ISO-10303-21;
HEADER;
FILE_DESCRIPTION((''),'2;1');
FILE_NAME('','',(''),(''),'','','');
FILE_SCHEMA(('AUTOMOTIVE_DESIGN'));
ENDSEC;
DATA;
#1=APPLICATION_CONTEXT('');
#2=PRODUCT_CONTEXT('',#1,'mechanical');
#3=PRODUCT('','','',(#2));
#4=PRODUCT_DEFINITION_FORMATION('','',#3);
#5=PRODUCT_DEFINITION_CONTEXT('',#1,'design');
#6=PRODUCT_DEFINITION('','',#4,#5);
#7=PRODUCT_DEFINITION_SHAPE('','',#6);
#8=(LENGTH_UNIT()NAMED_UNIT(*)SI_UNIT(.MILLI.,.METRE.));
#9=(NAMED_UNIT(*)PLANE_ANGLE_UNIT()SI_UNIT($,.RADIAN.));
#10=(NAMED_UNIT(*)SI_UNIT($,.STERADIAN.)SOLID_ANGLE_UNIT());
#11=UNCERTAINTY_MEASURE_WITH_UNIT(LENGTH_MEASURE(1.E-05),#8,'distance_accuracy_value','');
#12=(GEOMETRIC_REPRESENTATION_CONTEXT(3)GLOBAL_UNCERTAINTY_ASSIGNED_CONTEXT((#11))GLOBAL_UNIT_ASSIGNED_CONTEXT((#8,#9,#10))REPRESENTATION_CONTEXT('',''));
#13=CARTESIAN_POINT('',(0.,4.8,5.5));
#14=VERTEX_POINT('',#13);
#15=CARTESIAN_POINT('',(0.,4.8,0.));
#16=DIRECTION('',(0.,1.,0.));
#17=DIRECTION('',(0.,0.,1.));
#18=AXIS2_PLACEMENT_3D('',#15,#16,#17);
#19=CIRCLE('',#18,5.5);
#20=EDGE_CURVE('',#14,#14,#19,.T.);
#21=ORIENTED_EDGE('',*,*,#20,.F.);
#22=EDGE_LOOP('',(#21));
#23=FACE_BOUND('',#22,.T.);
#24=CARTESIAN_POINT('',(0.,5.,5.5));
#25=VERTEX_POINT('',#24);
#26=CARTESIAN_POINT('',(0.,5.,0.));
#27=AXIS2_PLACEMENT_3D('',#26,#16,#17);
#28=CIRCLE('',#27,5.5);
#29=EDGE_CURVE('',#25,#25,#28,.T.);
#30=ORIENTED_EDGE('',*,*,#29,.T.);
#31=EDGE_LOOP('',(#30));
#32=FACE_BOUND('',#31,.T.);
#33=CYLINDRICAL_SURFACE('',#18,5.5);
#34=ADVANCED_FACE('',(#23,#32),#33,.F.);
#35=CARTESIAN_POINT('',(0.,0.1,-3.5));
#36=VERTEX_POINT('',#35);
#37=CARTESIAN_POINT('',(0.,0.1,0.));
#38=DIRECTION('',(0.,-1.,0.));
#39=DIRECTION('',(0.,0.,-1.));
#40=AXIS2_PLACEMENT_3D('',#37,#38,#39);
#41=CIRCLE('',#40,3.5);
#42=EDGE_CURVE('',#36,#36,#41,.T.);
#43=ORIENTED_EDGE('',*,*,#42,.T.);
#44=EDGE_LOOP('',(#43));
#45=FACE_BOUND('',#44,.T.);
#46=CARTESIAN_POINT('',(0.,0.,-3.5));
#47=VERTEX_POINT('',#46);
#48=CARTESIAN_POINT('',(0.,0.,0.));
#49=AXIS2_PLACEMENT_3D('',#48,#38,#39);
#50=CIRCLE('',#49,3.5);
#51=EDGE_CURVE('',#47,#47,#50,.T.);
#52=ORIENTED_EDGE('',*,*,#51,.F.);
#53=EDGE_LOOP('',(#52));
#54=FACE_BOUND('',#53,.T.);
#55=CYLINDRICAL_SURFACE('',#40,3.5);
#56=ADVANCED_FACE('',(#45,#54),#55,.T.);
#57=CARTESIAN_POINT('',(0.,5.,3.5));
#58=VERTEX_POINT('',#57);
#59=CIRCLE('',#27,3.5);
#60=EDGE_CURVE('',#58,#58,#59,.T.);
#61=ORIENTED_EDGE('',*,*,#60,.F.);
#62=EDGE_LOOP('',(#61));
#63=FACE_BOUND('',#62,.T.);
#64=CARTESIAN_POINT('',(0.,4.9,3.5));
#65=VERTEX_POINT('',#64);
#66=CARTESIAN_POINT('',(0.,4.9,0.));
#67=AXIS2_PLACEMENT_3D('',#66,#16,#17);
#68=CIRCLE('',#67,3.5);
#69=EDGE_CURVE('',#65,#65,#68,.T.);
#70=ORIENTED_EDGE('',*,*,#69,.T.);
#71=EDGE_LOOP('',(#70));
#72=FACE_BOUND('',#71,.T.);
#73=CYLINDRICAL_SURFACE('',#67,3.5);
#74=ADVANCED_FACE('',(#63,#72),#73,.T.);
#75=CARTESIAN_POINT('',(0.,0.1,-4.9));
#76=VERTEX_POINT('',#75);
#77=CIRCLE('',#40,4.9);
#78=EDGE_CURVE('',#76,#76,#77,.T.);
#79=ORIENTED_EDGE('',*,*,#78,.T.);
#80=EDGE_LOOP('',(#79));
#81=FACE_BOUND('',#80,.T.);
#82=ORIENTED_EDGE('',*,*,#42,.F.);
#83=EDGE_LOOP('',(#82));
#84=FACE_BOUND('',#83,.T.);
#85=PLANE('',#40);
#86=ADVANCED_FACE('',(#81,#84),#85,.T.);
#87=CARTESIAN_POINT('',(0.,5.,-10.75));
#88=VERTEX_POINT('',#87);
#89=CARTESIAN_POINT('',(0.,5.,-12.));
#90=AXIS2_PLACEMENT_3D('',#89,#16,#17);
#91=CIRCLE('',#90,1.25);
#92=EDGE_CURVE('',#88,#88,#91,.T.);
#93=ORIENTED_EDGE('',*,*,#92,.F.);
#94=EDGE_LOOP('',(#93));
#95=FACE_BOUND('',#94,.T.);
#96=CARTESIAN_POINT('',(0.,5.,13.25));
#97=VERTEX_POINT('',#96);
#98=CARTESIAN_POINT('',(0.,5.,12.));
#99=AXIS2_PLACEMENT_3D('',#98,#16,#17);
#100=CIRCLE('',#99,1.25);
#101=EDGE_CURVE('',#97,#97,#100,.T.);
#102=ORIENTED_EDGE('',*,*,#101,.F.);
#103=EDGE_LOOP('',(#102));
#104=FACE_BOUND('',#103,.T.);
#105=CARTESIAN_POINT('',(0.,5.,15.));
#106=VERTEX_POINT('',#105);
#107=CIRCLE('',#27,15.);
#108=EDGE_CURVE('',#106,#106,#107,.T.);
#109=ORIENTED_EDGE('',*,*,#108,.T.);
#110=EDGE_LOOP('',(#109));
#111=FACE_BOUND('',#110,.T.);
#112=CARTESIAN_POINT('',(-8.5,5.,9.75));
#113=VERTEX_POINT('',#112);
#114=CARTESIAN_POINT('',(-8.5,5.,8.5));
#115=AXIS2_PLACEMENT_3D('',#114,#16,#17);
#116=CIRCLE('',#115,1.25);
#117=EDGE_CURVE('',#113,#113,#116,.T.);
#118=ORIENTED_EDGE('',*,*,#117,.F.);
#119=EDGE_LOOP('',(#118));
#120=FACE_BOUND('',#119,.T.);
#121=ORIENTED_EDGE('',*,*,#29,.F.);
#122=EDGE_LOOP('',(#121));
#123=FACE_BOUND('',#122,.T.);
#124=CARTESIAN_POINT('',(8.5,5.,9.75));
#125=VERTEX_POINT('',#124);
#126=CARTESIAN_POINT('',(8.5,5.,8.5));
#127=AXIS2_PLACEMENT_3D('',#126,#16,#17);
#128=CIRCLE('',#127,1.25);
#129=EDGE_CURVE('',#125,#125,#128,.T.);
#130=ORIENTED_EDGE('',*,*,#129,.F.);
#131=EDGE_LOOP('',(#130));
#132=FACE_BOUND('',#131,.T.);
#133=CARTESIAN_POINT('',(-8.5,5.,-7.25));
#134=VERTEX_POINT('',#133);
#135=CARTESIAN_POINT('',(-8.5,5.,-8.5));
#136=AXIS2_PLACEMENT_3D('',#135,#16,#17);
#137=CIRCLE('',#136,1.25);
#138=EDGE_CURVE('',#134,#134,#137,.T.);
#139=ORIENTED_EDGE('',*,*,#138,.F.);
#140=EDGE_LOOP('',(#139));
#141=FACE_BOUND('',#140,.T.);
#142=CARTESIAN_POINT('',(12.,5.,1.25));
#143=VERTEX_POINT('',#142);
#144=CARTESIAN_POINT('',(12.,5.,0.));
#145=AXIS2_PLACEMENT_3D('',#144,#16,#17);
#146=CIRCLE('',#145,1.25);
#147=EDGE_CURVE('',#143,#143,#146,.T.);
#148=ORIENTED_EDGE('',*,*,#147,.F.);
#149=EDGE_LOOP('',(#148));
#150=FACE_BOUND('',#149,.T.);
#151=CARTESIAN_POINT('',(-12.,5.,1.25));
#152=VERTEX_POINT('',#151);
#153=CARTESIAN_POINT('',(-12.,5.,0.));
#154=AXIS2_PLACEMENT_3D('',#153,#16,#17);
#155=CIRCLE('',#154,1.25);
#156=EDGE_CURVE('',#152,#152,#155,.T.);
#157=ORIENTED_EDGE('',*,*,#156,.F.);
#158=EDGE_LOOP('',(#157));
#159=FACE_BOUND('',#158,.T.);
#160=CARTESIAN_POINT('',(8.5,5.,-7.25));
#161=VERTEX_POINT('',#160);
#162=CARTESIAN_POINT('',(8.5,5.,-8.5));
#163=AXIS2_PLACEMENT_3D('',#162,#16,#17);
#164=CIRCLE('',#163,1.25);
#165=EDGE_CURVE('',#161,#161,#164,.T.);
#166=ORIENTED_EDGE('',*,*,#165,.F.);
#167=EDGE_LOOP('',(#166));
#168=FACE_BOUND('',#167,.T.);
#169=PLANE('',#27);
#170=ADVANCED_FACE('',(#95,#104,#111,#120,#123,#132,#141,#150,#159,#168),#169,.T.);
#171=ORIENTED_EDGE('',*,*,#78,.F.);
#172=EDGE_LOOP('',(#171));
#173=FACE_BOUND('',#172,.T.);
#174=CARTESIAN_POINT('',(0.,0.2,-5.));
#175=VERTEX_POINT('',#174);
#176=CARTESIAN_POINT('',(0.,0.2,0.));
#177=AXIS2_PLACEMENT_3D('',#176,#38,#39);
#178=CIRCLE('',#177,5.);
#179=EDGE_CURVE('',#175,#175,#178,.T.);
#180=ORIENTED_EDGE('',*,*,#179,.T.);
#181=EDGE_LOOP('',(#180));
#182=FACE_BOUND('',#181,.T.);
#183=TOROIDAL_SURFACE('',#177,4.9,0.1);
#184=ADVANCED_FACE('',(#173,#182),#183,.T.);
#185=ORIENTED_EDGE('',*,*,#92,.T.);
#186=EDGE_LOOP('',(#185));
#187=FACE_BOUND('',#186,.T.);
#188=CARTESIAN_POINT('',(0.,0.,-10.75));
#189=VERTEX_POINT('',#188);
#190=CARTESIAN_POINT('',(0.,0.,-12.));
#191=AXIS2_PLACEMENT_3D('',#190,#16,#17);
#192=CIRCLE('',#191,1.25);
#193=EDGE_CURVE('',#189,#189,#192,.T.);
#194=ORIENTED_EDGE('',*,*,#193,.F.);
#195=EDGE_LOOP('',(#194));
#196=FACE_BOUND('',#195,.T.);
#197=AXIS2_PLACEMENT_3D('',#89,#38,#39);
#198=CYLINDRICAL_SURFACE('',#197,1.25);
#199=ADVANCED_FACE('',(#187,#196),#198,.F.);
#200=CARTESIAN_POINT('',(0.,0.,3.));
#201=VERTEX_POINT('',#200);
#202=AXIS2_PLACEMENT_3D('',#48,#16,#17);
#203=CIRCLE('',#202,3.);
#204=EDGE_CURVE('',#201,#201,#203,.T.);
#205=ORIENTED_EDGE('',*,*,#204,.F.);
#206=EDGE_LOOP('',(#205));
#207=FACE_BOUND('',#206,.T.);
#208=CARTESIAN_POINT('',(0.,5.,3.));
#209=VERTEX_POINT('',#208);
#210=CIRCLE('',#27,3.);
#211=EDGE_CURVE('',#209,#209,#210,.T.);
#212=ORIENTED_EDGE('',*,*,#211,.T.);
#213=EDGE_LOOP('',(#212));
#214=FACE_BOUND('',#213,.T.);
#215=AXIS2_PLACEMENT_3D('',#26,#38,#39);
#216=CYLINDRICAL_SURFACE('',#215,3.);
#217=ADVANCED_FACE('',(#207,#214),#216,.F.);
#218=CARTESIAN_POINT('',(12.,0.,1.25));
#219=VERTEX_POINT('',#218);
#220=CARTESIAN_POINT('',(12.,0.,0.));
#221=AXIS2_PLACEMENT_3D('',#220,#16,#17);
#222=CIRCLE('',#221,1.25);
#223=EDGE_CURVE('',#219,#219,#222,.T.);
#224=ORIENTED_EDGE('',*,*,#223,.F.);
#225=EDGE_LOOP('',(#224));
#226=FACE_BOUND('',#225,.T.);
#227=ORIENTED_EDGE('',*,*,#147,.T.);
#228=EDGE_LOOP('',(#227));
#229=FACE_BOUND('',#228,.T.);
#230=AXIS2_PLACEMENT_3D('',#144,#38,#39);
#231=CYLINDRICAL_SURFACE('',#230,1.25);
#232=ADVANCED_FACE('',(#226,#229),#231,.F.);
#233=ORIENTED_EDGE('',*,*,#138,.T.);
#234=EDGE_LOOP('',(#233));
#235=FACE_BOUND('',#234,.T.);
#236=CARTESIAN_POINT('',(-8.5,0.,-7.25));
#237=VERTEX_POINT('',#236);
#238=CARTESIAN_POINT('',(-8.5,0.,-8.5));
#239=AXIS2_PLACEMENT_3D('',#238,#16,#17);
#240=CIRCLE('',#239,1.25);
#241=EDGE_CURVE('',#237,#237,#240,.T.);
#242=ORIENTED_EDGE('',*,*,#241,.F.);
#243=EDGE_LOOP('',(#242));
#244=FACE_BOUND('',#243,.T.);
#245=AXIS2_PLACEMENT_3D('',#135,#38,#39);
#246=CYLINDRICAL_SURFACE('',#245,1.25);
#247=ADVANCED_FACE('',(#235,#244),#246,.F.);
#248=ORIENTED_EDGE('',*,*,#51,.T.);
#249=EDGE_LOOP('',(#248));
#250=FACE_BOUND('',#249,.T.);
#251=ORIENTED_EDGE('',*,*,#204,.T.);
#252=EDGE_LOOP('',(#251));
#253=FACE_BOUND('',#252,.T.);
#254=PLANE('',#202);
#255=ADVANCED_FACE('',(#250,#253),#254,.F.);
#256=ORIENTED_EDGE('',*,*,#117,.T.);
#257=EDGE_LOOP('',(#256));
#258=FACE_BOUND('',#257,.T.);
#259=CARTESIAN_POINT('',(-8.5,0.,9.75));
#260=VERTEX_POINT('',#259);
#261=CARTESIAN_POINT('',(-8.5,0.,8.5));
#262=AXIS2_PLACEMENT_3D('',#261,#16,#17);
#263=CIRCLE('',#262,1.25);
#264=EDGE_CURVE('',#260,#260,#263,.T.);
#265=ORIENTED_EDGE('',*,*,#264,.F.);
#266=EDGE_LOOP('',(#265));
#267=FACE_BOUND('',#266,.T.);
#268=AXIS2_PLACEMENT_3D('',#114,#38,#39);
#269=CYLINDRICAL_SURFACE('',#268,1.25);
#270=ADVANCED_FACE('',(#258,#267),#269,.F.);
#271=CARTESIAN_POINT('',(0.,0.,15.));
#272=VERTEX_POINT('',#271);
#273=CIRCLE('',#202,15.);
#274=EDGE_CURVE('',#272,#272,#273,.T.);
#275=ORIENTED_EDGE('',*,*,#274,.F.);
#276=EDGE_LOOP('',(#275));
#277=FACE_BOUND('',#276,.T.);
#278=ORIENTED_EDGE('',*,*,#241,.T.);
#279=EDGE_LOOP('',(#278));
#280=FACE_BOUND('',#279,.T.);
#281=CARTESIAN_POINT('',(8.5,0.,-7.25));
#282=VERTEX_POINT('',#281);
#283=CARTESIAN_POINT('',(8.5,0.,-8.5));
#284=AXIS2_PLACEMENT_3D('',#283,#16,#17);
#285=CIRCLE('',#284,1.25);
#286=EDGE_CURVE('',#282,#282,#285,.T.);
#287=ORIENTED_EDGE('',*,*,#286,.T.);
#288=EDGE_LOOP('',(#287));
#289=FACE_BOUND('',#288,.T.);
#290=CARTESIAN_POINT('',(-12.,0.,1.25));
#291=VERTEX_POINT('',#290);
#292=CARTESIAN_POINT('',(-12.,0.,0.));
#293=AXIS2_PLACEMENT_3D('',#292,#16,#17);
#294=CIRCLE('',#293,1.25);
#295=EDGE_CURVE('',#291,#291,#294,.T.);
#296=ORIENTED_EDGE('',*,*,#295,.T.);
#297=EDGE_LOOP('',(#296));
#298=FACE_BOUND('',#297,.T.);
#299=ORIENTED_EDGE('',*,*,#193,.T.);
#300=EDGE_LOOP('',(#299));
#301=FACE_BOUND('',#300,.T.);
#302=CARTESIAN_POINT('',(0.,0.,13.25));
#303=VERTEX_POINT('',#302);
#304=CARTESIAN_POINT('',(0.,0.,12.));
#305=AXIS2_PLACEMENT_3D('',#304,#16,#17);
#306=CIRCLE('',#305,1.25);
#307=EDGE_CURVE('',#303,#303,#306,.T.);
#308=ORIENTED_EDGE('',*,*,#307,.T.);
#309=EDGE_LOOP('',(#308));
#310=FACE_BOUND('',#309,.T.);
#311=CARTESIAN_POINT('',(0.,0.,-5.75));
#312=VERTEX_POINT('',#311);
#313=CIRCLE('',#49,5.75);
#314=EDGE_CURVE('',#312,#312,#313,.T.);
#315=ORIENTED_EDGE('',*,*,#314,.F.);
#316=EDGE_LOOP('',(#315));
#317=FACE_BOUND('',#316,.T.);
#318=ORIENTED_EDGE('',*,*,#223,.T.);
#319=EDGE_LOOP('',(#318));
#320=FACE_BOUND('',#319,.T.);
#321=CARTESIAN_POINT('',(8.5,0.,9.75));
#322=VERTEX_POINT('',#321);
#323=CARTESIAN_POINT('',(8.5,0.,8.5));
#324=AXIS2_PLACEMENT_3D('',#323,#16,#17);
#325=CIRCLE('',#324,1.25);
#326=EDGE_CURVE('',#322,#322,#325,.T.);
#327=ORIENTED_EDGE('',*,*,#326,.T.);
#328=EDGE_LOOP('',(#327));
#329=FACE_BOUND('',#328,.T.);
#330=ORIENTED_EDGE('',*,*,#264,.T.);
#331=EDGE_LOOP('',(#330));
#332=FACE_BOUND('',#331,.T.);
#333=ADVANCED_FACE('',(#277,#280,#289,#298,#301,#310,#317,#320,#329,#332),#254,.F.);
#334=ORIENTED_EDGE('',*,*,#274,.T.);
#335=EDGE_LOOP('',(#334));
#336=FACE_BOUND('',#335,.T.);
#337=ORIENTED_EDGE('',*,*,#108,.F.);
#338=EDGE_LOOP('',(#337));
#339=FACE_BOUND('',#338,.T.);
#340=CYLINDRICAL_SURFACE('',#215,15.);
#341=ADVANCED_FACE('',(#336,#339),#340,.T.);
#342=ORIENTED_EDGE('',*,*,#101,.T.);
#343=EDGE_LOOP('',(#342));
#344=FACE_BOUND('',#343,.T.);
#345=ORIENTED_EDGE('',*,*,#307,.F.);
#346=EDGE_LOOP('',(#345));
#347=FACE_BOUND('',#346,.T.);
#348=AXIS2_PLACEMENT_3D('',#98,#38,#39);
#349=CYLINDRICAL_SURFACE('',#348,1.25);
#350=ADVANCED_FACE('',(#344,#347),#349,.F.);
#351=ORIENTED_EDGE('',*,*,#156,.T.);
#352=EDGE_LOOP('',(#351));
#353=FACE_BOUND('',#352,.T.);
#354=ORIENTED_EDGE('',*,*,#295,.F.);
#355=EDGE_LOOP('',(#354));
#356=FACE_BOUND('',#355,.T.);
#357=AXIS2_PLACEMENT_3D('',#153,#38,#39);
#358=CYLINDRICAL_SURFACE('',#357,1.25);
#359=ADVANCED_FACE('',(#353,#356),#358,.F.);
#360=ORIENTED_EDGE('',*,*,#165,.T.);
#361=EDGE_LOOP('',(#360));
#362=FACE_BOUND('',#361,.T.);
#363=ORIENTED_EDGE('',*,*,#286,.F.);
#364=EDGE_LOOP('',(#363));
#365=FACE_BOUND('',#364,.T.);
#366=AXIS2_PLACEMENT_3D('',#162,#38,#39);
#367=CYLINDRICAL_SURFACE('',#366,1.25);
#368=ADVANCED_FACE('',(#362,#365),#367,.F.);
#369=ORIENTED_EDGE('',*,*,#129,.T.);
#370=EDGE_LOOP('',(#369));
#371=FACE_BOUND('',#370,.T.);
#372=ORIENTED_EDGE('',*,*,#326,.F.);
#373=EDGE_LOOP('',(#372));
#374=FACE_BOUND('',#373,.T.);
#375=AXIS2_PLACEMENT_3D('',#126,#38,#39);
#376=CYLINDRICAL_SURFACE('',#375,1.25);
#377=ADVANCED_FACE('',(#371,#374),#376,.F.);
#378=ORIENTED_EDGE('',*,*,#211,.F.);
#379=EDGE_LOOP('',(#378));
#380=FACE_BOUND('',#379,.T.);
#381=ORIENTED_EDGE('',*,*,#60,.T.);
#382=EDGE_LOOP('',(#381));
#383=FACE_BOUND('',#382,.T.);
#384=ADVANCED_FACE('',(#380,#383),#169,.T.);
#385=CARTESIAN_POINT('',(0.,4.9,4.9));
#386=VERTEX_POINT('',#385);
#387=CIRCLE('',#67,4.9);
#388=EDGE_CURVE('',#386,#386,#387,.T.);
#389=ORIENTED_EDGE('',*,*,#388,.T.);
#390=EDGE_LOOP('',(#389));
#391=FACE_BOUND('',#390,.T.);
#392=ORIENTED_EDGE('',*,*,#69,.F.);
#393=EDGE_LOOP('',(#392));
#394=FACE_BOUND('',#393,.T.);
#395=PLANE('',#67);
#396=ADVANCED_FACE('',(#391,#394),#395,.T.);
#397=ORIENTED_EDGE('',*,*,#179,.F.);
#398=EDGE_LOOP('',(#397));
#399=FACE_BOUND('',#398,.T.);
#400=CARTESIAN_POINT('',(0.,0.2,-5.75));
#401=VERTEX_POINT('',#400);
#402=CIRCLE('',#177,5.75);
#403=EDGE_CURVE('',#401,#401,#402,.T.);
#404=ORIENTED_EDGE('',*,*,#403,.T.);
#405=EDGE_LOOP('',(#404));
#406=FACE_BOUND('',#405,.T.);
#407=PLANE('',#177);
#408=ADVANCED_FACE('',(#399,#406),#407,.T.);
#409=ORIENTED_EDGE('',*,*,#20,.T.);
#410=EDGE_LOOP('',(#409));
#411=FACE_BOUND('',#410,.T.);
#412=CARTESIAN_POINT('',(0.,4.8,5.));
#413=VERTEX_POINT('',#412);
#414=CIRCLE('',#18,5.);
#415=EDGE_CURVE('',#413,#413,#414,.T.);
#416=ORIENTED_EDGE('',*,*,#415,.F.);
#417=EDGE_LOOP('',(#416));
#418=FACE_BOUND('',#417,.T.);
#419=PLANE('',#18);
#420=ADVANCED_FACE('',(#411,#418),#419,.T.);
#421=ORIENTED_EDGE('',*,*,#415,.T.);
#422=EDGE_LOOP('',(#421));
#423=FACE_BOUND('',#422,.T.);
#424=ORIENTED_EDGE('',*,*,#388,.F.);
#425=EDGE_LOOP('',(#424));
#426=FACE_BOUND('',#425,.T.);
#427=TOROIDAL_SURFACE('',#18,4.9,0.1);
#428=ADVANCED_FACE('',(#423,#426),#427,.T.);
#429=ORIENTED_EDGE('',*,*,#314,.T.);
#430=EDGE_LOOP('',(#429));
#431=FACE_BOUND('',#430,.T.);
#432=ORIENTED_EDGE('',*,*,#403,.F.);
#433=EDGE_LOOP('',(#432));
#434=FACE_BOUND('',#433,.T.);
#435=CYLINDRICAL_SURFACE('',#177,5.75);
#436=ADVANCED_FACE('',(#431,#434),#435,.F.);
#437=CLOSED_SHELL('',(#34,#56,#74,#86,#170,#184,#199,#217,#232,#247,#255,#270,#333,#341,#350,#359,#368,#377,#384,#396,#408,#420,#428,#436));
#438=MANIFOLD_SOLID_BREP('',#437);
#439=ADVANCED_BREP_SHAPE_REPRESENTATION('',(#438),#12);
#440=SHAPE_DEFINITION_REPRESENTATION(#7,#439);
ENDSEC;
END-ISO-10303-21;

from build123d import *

# Parameters (mm, degrees)
SKETCH1_R           = 15
SKETCH1_R_2         = 1.25
SKETCH1_R_3         = 3
BOSS_EXTRUDE1_DEPTH = 5
SKETCH4_R           = 5.5
SKETCH4_R_2         = 5
CUT_EXTRUDE1_DEPTH  = 0.2
SKETCH4_3_R         = 5
SKETCH4_3_R_2       = 3.5
CUT_EXTRUDE2_DEPTH  = 0.1
CUT_EXTRUDE3_START  = -0.1
SKETCH5_R           = 5
SKETCH5_R_2         = 3.5
CUT_EXTRUDE3_DEPTH  = 0.1
CUT_EXTRUDE4_START  = -0.2
SKETCH5_3_R         = 5.75
SKETCH5_3_R_2       = 5
CUT_EXTRUDE4_DEPTH  = 0.2
FILLET1_R           = 0.1


with BuildPart() as part:
    # Sketch1 → Boss-Extrude1 (new body)
    with BuildSketch(Plane(origin=(0, 0, 0), x_dir=(1, 0, 0), z_dir=(0, 1, 0))):
        with Locations(Location((0, 0, 0), (0, 0, 270))):
            Circle(SKETCH1_R)
        with Locations(Location((0, 12, 0), (0, 0, 270))):
            Circle(SKETCH1_R_2, mode=Mode.SUBTRACT)
        with Locations(Location((0, -12, 0), (0, 0, 270))):
            Circle(SKETCH1_R_2, mode=Mode.SUBTRACT)
        with Locations(Location((0, 0, 0), (0, 0, 270))):
            Circle(SKETCH1_R_3, mode=Mode.SUBTRACT)
        with Locations(Location((-12, 0, 0), (0, 0, 270))):
            Circle(SKETCH1_R_2, mode=Mode.SUBTRACT)
        with Locations(Location((12, 0, 0), (0, 0, 270))):
            Circle(SKETCH1_R_2, mode=Mode.SUBTRACT)
        with Locations(Location((8.5, 8.5, 0), (0, 0, 270))):
            Circle(SKETCH1_R_2, mode=Mode.SUBTRACT)
        with Locations(Location((8.5, -8.5, 0), (0, 0, 270))):
            Circle(SKETCH1_R_2, mode=Mode.SUBTRACT)
        with Locations(Location((-8.5, -8.5, 0), (0, 0, 270))):
            Circle(SKETCH1_R_2, mode=Mode.SUBTRACT)
        with Locations(Location((-8.5, 8.5, 0), (0, 0, 270))):
            Circle(SKETCH1_R_2, mode=Mode.SUBTRACT)
    extrude(amount=BOSS_EXTRUDE1_DEPTH)

    # Sketch4 → Cut-Extrude1 (cut)
    with BuildSketch(Plane(origin=(0, 5, 0), x_dir=(1, 0, 0), z_dir=(0, 1, 0))):
        with Locations(Location((0, 0, 0), (0, 0, 270))):
            Circle(SKETCH4_R)
        with Locations(Location((0, 0, 0), (0, 0, 270))):
            Circle(SKETCH4_R_2, mode=Mode.SUBTRACT)
    extrude(amount=-CUT_EXTRUDE1_DEPTH, mode=Mode.SUBTRACT)

    # Sketch4<3> → Cut-Extrude2 (cut)
    with BuildSketch(Plane(origin=(0, 5, 0), x_dir=(1, 0, 0), z_dir=(0, 1, 0))):
        with Locations(Location((0, 0, 0), (0, 0, 270))):
            Circle(SKETCH4_3_R)
        with Locations(Location((0, 0, 0), (0, 0, 270))):
            Circle(SKETCH4_3_R_2, mode=Mode.SUBTRACT)
    extrude(amount=-CUT_EXTRUDE2_DEPTH, mode=Mode.SUBTRACT)

    # Sketch5 → Cut-Extrude3 (cut)
    with BuildSketch(Plane.XZ.offset(CUT_EXTRUDE3_START)):
        with Locations(Location((0, 0, 0), (0, 0, 90))):
            Circle(SKETCH5_R)
        with Locations(Location((0, 0, 0), (0, 0, 90))):
            Circle(SKETCH5_R_2, mode=Mode.SUBTRACT)
    extrude(amount=CUT_EXTRUDE3_DEPTH, mode=Mode.SUBTRACT)

    # Sketch5<3> → Cut-Extrude4 (cut)
    with BuildSketch(Plane.XZ.offset(CUT_EXTRUDE4_START)):
        with Locations(Location((0, 0, 0), (0, 0, 270))):
            Circle(SKETCH5_3_R)
        with Locations(Location((0, 0, 0), (0, 0, 90))):
            Circle(SKETCH5_3_R_2, mode=Mode.SUBTRACT)
    extrude(amount=CUT_EXTRUDE4_DEPTH, mode=Mode.SUBTRACT)

    # Fillet1
    fillet1_edges = [part.edges().sort_by_distance(p)[0] for p in [
        (0, 4.9, -5),
        (0, 0.1, -5),
    ]]
    fillet(fillet1_edges, radius=FILLET1_R - 0.0001)  # a hair under: the kernel refuses the full size


solid = part.part
